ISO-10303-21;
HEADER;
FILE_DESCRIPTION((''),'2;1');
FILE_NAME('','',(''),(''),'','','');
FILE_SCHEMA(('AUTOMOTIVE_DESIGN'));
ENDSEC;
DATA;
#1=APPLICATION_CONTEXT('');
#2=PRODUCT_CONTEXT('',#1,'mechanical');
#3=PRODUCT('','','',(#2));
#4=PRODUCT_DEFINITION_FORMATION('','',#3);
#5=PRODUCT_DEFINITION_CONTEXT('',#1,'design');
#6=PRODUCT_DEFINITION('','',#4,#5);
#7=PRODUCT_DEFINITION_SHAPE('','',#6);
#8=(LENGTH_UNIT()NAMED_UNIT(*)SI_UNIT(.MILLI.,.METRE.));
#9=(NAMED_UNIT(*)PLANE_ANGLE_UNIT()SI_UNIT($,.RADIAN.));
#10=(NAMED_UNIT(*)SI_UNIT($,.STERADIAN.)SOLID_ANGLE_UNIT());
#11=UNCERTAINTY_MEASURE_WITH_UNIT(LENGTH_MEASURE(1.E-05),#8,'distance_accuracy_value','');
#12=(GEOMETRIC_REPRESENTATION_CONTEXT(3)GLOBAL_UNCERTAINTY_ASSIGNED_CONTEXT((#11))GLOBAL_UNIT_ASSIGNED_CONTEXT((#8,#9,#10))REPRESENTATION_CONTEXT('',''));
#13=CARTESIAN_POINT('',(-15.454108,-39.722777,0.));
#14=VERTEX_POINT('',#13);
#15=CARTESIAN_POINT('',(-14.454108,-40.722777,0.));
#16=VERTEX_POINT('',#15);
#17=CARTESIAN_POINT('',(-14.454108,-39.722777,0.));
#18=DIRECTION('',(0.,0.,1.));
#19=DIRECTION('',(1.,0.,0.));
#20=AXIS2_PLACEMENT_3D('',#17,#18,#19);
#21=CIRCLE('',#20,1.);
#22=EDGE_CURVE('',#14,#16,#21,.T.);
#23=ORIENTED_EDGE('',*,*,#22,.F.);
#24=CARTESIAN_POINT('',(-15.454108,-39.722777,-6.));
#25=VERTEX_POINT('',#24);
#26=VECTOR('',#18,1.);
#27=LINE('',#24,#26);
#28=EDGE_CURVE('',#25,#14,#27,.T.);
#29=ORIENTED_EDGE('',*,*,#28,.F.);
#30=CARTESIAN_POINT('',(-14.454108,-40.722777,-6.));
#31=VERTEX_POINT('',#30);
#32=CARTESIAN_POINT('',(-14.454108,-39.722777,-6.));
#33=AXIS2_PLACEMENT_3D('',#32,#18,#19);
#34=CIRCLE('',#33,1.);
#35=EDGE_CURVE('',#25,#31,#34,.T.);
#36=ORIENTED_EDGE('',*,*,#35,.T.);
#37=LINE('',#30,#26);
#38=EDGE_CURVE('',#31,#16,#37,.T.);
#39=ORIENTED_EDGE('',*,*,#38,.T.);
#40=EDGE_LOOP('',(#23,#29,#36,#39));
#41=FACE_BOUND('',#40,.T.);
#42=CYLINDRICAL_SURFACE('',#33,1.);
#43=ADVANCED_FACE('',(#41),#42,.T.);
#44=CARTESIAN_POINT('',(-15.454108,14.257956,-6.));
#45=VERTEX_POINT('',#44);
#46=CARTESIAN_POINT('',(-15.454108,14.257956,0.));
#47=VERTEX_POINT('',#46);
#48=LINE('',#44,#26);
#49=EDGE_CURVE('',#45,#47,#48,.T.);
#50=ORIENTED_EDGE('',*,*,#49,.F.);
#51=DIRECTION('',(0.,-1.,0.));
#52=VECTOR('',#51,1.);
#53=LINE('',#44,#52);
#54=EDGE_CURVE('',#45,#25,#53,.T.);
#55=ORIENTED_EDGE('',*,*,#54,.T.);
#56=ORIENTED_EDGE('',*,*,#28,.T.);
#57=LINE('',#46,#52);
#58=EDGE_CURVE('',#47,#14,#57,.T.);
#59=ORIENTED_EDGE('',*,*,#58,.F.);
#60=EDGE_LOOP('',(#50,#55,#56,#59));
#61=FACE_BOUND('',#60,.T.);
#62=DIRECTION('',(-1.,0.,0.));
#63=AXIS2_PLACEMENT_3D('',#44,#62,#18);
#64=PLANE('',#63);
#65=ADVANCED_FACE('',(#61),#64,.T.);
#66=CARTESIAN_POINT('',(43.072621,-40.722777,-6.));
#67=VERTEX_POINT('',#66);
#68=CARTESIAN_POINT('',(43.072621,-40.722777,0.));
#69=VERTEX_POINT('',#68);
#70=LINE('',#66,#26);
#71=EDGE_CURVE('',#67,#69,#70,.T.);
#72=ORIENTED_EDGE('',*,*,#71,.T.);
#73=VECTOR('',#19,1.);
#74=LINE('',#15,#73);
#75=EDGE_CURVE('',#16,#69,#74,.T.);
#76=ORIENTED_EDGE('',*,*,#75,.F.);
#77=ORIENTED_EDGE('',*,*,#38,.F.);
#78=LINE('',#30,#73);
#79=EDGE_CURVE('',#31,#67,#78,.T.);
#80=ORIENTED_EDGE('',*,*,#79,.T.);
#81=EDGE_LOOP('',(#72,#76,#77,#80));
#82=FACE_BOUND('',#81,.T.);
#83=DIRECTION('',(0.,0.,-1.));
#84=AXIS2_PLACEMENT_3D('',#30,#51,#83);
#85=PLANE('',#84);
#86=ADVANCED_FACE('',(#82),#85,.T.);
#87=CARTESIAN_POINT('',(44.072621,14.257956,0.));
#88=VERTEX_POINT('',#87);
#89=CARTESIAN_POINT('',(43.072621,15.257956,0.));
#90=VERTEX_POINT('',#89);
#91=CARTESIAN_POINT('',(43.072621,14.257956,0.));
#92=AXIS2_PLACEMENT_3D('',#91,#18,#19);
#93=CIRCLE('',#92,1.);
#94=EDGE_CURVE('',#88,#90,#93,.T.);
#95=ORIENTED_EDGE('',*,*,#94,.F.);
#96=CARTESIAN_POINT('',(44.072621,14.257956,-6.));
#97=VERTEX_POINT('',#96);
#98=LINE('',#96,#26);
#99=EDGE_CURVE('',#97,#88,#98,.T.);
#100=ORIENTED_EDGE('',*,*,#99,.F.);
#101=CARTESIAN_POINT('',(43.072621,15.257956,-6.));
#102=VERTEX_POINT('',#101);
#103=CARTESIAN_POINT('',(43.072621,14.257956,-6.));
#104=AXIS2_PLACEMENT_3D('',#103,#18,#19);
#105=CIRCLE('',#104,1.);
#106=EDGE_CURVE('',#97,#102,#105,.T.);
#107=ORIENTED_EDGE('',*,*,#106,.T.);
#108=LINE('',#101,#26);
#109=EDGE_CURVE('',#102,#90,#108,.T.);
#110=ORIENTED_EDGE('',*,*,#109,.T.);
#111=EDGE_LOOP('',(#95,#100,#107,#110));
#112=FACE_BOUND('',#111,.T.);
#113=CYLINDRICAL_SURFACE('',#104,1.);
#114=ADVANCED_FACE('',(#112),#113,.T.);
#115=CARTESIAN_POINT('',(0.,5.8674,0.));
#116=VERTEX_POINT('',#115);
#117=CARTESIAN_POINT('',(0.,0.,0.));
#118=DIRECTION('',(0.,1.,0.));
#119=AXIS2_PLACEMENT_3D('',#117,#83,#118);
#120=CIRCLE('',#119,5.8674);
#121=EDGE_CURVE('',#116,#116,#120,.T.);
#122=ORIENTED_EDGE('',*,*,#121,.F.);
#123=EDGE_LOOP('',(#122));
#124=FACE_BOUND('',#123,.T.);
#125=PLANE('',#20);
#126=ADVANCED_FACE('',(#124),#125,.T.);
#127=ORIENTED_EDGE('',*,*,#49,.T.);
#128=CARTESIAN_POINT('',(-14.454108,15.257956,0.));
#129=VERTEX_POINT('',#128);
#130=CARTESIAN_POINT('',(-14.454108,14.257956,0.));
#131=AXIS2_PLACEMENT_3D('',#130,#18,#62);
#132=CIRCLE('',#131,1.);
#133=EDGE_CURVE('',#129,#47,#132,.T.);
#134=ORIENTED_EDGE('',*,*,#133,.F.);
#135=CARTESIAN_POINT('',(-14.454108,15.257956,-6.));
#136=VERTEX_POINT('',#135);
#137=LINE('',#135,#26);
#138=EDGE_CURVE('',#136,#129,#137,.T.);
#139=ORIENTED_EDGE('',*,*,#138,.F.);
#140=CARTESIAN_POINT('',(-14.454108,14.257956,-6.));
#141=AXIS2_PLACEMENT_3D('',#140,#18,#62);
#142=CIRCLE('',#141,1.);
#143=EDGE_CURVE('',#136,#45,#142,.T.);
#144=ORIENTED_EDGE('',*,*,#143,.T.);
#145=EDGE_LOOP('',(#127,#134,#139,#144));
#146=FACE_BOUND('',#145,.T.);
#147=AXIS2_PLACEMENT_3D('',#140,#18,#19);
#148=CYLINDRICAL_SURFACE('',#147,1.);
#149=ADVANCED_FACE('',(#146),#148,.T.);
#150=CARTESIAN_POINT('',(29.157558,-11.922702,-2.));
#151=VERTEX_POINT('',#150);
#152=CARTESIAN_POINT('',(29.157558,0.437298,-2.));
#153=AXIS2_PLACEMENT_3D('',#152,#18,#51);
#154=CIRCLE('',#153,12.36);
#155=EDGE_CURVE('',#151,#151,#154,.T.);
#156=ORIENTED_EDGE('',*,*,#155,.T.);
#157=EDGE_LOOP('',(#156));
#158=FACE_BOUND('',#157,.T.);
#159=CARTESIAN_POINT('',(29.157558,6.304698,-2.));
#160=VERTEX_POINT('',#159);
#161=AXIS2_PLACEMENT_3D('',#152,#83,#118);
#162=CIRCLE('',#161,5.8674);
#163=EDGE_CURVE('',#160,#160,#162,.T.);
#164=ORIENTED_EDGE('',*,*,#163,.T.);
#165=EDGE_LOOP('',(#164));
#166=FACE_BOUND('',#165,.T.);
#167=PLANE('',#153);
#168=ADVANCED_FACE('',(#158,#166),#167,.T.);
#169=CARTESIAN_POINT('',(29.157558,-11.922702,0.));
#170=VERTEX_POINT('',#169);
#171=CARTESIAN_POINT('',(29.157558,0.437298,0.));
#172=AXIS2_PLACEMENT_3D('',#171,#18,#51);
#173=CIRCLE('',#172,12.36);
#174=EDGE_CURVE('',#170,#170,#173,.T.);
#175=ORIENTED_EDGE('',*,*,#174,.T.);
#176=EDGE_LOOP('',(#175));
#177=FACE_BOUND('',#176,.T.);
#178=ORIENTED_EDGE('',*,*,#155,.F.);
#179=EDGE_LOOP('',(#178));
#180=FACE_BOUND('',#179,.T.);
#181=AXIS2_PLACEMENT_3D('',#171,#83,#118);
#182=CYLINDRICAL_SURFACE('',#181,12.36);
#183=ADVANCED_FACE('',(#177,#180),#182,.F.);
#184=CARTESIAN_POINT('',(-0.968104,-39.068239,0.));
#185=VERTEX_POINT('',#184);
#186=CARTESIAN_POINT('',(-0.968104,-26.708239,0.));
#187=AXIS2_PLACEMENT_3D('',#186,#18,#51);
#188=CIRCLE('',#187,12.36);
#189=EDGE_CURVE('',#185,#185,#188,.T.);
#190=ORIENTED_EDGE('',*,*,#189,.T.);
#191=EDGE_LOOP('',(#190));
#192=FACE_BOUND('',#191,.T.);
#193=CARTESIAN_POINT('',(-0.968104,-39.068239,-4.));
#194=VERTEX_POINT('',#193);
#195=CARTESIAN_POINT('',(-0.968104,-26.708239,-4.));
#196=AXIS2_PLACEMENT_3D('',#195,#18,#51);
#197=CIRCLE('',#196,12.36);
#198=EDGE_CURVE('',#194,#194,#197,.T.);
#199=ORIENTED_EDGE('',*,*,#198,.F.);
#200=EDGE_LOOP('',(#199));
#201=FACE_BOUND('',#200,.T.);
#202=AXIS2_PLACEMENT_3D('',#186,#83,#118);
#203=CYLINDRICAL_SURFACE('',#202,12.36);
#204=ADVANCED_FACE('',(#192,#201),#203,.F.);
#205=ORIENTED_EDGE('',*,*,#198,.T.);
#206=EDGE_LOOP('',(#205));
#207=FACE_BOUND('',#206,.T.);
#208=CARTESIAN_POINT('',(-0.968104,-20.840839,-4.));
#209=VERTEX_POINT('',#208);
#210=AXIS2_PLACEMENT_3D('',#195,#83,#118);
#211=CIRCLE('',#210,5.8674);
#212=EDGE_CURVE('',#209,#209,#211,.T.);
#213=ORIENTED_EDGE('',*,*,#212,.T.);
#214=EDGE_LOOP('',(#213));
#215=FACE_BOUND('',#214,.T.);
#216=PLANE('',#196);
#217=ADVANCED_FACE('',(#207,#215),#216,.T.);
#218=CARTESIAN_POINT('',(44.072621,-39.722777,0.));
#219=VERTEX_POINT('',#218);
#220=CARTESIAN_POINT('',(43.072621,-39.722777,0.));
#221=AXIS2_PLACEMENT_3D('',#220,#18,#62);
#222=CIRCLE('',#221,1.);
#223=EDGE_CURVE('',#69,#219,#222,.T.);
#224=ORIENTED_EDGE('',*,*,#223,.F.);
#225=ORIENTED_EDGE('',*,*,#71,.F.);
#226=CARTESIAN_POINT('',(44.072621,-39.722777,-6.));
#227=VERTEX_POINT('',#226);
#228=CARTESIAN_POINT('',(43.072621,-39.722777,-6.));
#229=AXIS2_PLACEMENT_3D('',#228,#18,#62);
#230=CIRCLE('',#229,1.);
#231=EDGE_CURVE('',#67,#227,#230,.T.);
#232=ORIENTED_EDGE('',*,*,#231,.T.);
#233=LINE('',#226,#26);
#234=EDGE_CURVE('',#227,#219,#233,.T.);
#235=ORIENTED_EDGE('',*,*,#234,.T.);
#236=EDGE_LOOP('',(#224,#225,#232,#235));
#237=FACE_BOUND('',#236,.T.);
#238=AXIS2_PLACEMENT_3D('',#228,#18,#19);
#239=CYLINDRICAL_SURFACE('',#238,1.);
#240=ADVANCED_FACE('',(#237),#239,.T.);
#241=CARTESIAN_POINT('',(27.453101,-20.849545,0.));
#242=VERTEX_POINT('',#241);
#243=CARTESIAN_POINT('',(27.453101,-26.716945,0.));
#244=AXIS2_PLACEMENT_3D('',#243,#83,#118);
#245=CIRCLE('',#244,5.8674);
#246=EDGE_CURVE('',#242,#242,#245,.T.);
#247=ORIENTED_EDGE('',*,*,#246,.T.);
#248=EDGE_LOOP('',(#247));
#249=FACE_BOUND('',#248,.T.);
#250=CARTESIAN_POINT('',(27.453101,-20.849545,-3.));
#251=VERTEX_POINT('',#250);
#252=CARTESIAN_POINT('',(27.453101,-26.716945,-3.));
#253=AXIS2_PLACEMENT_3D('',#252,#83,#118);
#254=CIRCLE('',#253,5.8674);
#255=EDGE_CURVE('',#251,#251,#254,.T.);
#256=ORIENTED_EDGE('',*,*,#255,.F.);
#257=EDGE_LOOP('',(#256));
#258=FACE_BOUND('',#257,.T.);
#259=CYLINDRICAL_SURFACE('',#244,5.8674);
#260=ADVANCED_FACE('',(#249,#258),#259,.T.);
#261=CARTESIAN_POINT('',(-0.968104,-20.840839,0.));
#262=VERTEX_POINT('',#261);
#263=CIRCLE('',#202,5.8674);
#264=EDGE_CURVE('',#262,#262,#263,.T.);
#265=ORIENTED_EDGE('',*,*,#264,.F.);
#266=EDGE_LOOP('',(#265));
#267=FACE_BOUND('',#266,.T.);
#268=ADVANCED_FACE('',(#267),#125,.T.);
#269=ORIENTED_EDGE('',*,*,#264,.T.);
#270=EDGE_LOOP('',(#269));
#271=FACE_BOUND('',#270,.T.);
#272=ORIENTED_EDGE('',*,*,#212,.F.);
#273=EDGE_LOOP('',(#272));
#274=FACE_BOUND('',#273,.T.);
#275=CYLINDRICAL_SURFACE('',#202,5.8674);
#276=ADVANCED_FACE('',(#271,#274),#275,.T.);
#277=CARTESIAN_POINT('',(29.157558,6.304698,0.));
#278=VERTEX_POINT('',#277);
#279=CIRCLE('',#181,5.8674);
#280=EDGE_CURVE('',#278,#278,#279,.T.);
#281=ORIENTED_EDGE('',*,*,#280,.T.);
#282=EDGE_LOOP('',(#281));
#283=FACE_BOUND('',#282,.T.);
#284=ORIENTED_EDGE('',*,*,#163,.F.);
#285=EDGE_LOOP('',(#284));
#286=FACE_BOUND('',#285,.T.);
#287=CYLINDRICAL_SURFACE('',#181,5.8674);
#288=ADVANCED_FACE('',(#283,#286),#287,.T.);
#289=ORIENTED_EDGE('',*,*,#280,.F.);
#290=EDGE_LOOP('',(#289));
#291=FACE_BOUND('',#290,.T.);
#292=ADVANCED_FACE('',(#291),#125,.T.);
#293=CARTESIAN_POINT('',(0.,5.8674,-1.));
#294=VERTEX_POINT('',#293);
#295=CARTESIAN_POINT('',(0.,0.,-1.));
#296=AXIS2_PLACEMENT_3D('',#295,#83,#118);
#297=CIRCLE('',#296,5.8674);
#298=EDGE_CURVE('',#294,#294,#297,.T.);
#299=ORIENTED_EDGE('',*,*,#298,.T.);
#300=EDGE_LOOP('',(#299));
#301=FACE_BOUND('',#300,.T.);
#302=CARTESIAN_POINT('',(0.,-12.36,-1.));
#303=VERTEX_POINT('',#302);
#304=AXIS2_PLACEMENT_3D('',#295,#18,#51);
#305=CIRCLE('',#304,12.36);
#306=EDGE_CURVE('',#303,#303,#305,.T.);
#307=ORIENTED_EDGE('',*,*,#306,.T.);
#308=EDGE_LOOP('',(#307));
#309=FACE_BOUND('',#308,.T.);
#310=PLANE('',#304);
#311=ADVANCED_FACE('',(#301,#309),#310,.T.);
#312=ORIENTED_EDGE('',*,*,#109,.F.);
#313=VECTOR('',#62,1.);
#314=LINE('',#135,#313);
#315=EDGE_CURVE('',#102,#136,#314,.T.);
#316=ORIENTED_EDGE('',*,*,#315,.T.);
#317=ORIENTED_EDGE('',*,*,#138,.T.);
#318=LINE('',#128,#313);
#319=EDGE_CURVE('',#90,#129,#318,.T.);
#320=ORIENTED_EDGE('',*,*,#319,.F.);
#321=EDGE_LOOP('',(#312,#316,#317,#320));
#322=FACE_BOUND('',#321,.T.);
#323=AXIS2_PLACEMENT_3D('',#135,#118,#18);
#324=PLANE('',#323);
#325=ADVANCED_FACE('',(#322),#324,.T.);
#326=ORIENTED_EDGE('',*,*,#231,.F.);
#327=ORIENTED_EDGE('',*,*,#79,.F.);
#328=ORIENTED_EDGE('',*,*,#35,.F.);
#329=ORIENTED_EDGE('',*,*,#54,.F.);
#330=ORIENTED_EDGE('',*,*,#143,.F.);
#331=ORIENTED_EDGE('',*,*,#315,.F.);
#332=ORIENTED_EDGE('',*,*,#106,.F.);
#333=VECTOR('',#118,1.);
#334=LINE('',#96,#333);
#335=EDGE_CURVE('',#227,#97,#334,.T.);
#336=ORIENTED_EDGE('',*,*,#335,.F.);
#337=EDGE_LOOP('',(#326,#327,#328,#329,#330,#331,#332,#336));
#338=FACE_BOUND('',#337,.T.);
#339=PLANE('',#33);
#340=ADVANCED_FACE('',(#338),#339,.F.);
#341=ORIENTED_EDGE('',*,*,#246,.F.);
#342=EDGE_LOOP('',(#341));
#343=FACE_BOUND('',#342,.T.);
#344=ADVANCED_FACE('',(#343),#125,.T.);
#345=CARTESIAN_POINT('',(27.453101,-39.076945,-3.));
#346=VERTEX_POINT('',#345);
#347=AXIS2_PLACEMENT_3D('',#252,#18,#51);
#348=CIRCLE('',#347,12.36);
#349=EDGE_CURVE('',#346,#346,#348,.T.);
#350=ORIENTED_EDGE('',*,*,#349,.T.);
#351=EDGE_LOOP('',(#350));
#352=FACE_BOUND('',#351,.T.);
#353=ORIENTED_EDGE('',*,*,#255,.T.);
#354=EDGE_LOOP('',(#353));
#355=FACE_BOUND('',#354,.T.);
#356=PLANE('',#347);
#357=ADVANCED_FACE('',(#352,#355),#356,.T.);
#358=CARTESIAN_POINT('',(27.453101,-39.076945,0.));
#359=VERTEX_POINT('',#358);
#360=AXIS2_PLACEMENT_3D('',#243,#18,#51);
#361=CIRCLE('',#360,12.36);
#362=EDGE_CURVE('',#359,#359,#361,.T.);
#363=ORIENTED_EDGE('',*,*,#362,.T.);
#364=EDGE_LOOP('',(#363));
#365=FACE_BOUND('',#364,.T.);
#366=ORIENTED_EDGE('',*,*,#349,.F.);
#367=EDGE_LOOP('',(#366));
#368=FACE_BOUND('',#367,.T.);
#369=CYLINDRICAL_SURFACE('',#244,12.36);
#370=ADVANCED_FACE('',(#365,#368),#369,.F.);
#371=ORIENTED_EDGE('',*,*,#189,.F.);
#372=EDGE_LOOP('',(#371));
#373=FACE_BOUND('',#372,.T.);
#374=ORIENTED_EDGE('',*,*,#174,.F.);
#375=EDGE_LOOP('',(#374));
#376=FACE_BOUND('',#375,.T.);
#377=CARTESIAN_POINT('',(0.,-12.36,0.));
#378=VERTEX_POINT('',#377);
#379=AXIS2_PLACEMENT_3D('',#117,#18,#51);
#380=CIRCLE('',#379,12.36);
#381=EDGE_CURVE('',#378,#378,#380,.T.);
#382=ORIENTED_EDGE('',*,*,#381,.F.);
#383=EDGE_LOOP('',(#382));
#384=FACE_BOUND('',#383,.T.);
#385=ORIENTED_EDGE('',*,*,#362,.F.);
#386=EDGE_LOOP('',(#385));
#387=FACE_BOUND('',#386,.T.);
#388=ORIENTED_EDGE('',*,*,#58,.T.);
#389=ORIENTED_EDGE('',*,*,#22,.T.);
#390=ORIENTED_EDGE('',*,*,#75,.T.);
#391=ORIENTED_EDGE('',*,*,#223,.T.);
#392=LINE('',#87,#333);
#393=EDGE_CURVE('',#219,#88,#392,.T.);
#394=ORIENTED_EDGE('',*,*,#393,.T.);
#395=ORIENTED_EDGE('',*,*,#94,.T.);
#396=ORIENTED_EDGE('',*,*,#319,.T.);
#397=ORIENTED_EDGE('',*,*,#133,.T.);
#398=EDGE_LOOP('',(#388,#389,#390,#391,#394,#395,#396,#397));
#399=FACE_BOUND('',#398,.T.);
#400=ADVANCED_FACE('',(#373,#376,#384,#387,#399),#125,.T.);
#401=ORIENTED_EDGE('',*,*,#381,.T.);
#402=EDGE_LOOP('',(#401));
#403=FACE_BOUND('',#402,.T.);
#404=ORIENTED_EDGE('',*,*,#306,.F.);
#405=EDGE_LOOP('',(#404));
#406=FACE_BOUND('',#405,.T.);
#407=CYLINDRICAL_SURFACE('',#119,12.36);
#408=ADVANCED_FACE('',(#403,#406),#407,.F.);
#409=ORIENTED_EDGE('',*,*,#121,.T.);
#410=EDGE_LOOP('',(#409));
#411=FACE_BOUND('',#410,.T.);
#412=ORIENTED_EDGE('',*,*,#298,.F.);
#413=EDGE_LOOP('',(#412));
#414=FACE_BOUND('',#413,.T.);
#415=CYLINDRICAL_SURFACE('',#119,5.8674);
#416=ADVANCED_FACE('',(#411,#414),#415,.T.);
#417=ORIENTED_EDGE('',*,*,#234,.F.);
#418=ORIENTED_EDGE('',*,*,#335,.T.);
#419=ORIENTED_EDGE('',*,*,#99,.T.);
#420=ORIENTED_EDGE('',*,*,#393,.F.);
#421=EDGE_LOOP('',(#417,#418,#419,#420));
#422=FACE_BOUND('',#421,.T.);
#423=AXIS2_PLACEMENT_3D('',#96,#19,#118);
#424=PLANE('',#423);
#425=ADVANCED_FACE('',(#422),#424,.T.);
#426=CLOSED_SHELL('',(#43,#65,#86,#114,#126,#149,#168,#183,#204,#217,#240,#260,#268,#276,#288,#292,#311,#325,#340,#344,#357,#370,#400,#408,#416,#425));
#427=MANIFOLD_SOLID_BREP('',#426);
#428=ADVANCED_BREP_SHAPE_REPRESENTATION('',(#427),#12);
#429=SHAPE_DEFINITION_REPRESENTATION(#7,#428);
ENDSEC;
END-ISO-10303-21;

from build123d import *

# Parameters (mm, degrees)
BOSS_EXTRUDE1_DEPTH   = 6
CAVITY1_START         = -3
CAVITY1_OUTLINE_R     = 12.36
CAVITY1_OUTLINE_R_2   = 5.8674
CAVITY1_DEPTH         = 3
CAVITY1_START_2       = -2
CAVITY1_2_OUTLINE_R   = 12.36
CAVITY1_2_OUTLINE_R_2 = 5.8674
CAVITY1_2_DEPTH       = 2
CAVITY1_START_3       = -4
CAVITY1_3_OUTLINE_R   = 12.36
CAVITY1_3_OUTLINE_R_2 = 5.8674
CAVITY1_3_DEPTH       = 1
CAVITY1_START_4       = -1
CAVITY1_4_OUTLINE_R   = 12.36
CAVITY1_4_OUTLINE_R_2 = 5.8674
CAVITY1_4_DEPTH       = 1


# Read off the part's stored shape, not the designer's step: Cavity1
with BuildPart() as part:
    # Sketch1 → Boss-Extrude1 (new body)
    with BuildSketch(Plane.XY):
        with BuildLine():
            Line((-14.454108138, 15.257956391), (43.072620808, 15.257956391))
            ThreePointArc((43.072620808, 15.257956391), (43.77972759, 14.965063172), (44.072620808, 14.257956391))
            Line((44.072620808, 14.257956391), (44.072620808, -39.722776706))
            ThreePointArc((44.072620808, -39.722776706), (43.77972759, -40.429883487), (43.072620808, -40.722776706))
            Line((43.072620808, -40.722776706), (-14.454108138, -40.722776706))
            ThreePointArc((-14.454108138, -40.722776706), (-15.16121492, -40.429883487), (-15.454108138, -39.722776706))
            Line((-15.454108138, -39.722776706), (-15.454108138, 14.257956391))
            ThreePointArc((-15.454108138, 14.257956391), (-15.16121492, 14.965063172), (-14.454108138, 15.257956391))
        make_face()
    extrude(amount=-BOSS_EXTRUDE1_DEPTH)

    # Cavity1 outline → Cavity1 (cut)
    # profile 1 of 2: a face of its own
    with BuildSketch(Plane.XY.offset(CAVITY1_START)):
        with Locations((-0.968104395, -26.708239151)):
            Circle(CAVITY1_OUTLINE_R)
        with Locations((-0.968104395, -26.708239151)):
            Circle(CAVITY1_OUTLINE_R_2, mode=Mode.SUBTRACT)
    # profile 2 of 2: a face of its own
    with BuildSketch(Plane.XY.offset(CAVITY1_START)):
        with Locations((27.453101021, -26.716944952)):
            Circle(CAVITY1_OUTLINE_R)
        with Locations((27.453101021, -26.716944952)):
            Circle(CAVITY1_OUTLINE_R_2, mode=Mode.SUBTRACT)
    extrude(amount=CAVITY1_DEPTH, mode=Mode.SUBTRACT)

    # Cavity1 2 outline → Cavity1 2 (cut)
    with BuildSketch(Plane.XY.offset(CAVITY1_START_2)):
        with Locations((29.157558022, 0.437297786)):
            Circle(CAVITY1_2_OUTLINE_R)
        with Locations((29.157558022, 0.437297786)):
            Circle(CAVITY1_2_OUTLINE_R_2, mode=Mode.SUBTRACT)
    extrude(amount=CAVITY1_2_DEPTH, mode=Mode.SUBTRACT)

    # Cavity1 3 outline → Cavity1 3 (cut)
    with BuildSketch(Plane.XY.offset(CAVITY1_START_3)):
        with Locations((-0.968104395, -26.708239151)):
            Circle(CAVITY1_3_OUTLINE_R)
        with Locations((-0.968104395, -26.708239151)):
            Circle(CAVITY1_3_OUTLINE_R_2, mode=Mode.SUBTRACT)
    extrude(amount=CAVITY1_3_DEPTH, mode=Mode.SUBTRACT)

    # Cavity1 4 outline → Cavity1 4 (cut)
    with BuildSketch(Plane.XY.offset(CAVITY1_START_4)):
        Circle(CAVITY1_4_OUTLINE_R)
        Circle(CAVITY1_4_OUTLINE_R_2, mode=Mode.SUBTRACT)
    extrude(amount=CAVITY1_4_DEPTH, mode=Mode.SUBTRACT)


solid = part.part
